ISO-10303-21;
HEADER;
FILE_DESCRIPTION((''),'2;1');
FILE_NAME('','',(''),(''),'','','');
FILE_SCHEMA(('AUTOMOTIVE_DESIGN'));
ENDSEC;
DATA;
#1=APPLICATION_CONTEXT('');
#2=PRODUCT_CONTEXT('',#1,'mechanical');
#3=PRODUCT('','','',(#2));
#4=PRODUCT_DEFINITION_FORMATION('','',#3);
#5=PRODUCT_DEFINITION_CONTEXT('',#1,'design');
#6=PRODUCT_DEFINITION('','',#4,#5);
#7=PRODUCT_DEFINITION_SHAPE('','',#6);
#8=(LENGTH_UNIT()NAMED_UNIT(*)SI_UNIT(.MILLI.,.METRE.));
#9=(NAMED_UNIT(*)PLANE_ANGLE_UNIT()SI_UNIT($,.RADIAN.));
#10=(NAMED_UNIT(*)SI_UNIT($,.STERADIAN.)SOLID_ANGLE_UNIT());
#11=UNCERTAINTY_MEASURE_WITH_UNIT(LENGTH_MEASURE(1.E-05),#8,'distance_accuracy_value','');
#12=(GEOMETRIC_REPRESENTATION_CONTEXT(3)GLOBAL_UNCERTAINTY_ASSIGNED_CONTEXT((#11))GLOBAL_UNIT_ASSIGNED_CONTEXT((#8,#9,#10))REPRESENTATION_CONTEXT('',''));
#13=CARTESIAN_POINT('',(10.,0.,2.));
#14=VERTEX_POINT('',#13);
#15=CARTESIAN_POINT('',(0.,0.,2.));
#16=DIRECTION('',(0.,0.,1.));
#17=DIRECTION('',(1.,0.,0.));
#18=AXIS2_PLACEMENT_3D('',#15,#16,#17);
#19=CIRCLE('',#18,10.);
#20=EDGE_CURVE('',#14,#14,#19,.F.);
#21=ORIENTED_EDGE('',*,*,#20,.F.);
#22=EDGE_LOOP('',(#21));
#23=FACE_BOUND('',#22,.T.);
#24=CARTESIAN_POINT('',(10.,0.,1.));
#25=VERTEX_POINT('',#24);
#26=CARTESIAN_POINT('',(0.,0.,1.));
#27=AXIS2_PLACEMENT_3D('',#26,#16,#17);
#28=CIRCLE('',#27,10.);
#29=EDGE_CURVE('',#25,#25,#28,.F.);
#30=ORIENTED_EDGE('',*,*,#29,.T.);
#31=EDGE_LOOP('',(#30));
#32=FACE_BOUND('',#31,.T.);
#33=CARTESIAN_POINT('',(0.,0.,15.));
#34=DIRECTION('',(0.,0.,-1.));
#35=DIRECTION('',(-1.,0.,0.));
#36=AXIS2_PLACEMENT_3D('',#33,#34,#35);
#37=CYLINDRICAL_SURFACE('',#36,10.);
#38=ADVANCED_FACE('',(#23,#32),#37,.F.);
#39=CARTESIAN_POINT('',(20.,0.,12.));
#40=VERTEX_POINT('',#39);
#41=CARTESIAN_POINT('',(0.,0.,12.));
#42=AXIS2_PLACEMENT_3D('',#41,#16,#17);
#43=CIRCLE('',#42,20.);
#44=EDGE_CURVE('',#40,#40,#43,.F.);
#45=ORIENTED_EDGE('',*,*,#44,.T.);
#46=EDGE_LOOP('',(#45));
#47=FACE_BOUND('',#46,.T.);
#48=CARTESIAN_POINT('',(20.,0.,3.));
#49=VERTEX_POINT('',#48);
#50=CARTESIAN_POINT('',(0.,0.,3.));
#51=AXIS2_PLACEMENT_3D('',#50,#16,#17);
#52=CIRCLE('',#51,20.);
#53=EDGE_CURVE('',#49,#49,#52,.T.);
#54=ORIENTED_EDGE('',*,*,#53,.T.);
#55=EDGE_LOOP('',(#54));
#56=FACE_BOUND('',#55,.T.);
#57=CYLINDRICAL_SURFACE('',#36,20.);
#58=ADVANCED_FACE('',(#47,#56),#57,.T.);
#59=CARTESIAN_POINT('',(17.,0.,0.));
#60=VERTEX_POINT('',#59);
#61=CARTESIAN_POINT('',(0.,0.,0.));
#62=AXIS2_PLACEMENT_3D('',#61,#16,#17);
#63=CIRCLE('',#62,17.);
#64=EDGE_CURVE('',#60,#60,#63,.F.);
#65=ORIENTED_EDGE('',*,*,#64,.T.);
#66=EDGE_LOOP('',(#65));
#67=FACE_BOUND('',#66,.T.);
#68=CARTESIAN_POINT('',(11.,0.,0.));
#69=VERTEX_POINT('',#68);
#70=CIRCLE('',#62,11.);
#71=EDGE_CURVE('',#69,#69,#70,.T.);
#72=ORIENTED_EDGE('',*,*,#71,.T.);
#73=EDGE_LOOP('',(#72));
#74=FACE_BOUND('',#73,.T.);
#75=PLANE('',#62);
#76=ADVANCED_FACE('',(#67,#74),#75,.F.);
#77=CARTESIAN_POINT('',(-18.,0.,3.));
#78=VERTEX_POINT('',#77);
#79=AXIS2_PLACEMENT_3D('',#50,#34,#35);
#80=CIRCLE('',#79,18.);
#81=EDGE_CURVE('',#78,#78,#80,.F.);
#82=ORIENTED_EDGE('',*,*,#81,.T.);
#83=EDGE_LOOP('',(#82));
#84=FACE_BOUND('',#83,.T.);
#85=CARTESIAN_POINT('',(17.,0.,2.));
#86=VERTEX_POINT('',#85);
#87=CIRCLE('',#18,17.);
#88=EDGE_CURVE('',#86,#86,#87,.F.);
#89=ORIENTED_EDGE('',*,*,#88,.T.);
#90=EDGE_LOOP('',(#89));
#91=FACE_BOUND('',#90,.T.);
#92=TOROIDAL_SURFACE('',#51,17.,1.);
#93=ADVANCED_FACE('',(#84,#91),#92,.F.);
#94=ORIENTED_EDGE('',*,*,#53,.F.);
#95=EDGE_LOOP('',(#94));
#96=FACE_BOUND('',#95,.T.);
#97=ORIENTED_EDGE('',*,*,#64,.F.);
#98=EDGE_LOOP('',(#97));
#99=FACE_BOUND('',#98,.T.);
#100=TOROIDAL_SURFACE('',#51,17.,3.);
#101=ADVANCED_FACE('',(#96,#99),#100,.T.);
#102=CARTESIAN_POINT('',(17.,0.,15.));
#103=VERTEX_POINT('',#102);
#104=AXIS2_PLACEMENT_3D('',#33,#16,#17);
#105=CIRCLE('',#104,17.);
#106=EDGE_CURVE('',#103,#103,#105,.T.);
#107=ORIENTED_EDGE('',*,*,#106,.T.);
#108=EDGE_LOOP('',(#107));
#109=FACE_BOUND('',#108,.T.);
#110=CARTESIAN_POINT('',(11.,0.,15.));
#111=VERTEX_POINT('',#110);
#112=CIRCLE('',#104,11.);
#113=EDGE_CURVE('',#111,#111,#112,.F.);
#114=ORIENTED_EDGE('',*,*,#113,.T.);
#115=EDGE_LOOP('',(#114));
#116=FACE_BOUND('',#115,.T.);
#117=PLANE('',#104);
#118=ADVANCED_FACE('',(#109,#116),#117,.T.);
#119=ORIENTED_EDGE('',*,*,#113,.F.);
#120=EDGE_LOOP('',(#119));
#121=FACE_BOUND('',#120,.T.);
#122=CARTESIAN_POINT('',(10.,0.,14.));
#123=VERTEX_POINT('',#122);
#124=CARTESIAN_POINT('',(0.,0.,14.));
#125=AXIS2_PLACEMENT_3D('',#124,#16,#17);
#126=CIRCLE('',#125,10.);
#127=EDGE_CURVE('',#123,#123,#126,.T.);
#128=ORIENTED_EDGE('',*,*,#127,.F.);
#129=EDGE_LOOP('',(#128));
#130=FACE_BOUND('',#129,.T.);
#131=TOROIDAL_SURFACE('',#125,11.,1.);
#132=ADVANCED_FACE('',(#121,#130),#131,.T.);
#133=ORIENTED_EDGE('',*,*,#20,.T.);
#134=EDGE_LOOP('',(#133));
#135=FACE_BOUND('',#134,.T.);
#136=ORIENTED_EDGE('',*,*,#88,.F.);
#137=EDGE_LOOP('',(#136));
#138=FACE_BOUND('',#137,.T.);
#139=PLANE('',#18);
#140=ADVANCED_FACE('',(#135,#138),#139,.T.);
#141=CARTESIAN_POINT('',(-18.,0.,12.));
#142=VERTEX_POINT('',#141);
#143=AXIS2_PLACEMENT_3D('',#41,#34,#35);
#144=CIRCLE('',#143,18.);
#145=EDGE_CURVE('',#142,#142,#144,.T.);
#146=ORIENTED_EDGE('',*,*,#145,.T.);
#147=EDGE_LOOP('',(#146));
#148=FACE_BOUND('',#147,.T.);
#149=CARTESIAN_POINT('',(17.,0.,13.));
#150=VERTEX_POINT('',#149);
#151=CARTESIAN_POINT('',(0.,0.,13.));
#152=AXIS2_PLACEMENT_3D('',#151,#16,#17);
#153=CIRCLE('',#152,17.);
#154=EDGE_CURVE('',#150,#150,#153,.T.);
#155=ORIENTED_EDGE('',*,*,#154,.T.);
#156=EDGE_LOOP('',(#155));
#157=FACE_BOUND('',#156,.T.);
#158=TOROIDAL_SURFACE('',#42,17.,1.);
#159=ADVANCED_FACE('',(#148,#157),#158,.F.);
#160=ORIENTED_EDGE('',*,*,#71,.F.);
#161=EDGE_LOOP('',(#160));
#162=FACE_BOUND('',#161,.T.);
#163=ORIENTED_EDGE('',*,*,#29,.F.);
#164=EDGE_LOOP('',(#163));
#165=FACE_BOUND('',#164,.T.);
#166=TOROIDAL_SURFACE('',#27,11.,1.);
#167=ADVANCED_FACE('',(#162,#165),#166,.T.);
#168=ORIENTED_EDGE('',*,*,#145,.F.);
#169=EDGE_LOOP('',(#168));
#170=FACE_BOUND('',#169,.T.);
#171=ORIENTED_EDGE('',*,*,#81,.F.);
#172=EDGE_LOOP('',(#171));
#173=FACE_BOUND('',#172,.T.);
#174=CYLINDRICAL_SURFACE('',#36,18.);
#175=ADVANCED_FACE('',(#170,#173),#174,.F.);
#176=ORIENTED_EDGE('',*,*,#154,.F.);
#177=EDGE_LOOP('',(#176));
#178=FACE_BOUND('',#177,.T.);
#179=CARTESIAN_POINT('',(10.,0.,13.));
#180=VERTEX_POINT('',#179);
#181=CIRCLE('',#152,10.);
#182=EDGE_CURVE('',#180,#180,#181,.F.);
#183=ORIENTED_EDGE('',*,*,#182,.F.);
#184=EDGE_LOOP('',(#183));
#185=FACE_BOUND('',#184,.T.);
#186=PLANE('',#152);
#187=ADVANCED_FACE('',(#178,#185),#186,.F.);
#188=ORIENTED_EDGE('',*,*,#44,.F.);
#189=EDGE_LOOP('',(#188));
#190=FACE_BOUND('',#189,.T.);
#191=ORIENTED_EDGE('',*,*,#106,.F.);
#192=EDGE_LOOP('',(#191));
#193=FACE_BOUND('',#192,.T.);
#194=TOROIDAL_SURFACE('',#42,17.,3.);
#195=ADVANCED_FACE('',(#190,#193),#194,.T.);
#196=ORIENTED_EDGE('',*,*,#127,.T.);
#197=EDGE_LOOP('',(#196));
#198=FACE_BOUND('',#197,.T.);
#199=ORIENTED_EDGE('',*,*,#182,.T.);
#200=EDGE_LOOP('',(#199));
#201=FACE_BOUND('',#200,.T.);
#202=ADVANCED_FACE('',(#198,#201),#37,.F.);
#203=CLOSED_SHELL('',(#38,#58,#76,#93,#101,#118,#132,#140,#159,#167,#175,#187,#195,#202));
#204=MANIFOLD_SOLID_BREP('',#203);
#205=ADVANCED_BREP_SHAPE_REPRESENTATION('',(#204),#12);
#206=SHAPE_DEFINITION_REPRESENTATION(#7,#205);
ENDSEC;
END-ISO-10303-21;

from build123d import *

# Parameters (mm, degrees)
SKETCH2_R           = 20
SKETCH2_R_2         = 10
EXTRUDE_THIN1_DEPTH = 15
FILLET1_R           = 3
FILLET2_R           = 1


# Read off the part's stored shape, not the designer's step: Shell1
with BuildPart() as part:
    # Sketch2 → Extrude-Thin1 (new body)
    with BuildSketch(Plane.XY):
        Circle(SKETCH2_R)
        Circle(SKETCH2_R_2, mode=Mode.SUBTRACT)
    extrude(amount=EXTRUDE_THIN1_DEPTH)

    # Fillet1
    fillet1_edges = [part.edges().sort_by_distance(p)[0] for p in [
        (-20, 0, 0),
        (-20, 0, 15),
    ]]
    fillet(fillet1_edges, radius=FILLET1_R)

    # Fillet2
    fillet2_edges = [part.edges().sort_by_distance(p)[0] for p in [
        (-10, 0, 0),
        (-10, 0, 15),
    ]]
    fillet(fillet2_edges, radius=FILLET2_R)

    # Shell1 outline → Shell1 (revolve, cut)
    with BuildSketch(Plane.XZ):
        with BuildLine():
            Line((17, 13), (10, 13))
            Line((10, 13), (10, 2))
            Line((10, 2), (17, 2))
            ThreePointArc((17, 2), (17.707106781, 2.292893219), (18, 3))
            Line((18, 3), (18, 12))
            ThreePointArc((18, 12), (17.707106781, 12.707106781), (17, 13))
        make_face()
    revolve(axis=Axis((0, 0, 0), (0, 0, 1)), mode=Mode.SUBTRACT)


solid = part.part
